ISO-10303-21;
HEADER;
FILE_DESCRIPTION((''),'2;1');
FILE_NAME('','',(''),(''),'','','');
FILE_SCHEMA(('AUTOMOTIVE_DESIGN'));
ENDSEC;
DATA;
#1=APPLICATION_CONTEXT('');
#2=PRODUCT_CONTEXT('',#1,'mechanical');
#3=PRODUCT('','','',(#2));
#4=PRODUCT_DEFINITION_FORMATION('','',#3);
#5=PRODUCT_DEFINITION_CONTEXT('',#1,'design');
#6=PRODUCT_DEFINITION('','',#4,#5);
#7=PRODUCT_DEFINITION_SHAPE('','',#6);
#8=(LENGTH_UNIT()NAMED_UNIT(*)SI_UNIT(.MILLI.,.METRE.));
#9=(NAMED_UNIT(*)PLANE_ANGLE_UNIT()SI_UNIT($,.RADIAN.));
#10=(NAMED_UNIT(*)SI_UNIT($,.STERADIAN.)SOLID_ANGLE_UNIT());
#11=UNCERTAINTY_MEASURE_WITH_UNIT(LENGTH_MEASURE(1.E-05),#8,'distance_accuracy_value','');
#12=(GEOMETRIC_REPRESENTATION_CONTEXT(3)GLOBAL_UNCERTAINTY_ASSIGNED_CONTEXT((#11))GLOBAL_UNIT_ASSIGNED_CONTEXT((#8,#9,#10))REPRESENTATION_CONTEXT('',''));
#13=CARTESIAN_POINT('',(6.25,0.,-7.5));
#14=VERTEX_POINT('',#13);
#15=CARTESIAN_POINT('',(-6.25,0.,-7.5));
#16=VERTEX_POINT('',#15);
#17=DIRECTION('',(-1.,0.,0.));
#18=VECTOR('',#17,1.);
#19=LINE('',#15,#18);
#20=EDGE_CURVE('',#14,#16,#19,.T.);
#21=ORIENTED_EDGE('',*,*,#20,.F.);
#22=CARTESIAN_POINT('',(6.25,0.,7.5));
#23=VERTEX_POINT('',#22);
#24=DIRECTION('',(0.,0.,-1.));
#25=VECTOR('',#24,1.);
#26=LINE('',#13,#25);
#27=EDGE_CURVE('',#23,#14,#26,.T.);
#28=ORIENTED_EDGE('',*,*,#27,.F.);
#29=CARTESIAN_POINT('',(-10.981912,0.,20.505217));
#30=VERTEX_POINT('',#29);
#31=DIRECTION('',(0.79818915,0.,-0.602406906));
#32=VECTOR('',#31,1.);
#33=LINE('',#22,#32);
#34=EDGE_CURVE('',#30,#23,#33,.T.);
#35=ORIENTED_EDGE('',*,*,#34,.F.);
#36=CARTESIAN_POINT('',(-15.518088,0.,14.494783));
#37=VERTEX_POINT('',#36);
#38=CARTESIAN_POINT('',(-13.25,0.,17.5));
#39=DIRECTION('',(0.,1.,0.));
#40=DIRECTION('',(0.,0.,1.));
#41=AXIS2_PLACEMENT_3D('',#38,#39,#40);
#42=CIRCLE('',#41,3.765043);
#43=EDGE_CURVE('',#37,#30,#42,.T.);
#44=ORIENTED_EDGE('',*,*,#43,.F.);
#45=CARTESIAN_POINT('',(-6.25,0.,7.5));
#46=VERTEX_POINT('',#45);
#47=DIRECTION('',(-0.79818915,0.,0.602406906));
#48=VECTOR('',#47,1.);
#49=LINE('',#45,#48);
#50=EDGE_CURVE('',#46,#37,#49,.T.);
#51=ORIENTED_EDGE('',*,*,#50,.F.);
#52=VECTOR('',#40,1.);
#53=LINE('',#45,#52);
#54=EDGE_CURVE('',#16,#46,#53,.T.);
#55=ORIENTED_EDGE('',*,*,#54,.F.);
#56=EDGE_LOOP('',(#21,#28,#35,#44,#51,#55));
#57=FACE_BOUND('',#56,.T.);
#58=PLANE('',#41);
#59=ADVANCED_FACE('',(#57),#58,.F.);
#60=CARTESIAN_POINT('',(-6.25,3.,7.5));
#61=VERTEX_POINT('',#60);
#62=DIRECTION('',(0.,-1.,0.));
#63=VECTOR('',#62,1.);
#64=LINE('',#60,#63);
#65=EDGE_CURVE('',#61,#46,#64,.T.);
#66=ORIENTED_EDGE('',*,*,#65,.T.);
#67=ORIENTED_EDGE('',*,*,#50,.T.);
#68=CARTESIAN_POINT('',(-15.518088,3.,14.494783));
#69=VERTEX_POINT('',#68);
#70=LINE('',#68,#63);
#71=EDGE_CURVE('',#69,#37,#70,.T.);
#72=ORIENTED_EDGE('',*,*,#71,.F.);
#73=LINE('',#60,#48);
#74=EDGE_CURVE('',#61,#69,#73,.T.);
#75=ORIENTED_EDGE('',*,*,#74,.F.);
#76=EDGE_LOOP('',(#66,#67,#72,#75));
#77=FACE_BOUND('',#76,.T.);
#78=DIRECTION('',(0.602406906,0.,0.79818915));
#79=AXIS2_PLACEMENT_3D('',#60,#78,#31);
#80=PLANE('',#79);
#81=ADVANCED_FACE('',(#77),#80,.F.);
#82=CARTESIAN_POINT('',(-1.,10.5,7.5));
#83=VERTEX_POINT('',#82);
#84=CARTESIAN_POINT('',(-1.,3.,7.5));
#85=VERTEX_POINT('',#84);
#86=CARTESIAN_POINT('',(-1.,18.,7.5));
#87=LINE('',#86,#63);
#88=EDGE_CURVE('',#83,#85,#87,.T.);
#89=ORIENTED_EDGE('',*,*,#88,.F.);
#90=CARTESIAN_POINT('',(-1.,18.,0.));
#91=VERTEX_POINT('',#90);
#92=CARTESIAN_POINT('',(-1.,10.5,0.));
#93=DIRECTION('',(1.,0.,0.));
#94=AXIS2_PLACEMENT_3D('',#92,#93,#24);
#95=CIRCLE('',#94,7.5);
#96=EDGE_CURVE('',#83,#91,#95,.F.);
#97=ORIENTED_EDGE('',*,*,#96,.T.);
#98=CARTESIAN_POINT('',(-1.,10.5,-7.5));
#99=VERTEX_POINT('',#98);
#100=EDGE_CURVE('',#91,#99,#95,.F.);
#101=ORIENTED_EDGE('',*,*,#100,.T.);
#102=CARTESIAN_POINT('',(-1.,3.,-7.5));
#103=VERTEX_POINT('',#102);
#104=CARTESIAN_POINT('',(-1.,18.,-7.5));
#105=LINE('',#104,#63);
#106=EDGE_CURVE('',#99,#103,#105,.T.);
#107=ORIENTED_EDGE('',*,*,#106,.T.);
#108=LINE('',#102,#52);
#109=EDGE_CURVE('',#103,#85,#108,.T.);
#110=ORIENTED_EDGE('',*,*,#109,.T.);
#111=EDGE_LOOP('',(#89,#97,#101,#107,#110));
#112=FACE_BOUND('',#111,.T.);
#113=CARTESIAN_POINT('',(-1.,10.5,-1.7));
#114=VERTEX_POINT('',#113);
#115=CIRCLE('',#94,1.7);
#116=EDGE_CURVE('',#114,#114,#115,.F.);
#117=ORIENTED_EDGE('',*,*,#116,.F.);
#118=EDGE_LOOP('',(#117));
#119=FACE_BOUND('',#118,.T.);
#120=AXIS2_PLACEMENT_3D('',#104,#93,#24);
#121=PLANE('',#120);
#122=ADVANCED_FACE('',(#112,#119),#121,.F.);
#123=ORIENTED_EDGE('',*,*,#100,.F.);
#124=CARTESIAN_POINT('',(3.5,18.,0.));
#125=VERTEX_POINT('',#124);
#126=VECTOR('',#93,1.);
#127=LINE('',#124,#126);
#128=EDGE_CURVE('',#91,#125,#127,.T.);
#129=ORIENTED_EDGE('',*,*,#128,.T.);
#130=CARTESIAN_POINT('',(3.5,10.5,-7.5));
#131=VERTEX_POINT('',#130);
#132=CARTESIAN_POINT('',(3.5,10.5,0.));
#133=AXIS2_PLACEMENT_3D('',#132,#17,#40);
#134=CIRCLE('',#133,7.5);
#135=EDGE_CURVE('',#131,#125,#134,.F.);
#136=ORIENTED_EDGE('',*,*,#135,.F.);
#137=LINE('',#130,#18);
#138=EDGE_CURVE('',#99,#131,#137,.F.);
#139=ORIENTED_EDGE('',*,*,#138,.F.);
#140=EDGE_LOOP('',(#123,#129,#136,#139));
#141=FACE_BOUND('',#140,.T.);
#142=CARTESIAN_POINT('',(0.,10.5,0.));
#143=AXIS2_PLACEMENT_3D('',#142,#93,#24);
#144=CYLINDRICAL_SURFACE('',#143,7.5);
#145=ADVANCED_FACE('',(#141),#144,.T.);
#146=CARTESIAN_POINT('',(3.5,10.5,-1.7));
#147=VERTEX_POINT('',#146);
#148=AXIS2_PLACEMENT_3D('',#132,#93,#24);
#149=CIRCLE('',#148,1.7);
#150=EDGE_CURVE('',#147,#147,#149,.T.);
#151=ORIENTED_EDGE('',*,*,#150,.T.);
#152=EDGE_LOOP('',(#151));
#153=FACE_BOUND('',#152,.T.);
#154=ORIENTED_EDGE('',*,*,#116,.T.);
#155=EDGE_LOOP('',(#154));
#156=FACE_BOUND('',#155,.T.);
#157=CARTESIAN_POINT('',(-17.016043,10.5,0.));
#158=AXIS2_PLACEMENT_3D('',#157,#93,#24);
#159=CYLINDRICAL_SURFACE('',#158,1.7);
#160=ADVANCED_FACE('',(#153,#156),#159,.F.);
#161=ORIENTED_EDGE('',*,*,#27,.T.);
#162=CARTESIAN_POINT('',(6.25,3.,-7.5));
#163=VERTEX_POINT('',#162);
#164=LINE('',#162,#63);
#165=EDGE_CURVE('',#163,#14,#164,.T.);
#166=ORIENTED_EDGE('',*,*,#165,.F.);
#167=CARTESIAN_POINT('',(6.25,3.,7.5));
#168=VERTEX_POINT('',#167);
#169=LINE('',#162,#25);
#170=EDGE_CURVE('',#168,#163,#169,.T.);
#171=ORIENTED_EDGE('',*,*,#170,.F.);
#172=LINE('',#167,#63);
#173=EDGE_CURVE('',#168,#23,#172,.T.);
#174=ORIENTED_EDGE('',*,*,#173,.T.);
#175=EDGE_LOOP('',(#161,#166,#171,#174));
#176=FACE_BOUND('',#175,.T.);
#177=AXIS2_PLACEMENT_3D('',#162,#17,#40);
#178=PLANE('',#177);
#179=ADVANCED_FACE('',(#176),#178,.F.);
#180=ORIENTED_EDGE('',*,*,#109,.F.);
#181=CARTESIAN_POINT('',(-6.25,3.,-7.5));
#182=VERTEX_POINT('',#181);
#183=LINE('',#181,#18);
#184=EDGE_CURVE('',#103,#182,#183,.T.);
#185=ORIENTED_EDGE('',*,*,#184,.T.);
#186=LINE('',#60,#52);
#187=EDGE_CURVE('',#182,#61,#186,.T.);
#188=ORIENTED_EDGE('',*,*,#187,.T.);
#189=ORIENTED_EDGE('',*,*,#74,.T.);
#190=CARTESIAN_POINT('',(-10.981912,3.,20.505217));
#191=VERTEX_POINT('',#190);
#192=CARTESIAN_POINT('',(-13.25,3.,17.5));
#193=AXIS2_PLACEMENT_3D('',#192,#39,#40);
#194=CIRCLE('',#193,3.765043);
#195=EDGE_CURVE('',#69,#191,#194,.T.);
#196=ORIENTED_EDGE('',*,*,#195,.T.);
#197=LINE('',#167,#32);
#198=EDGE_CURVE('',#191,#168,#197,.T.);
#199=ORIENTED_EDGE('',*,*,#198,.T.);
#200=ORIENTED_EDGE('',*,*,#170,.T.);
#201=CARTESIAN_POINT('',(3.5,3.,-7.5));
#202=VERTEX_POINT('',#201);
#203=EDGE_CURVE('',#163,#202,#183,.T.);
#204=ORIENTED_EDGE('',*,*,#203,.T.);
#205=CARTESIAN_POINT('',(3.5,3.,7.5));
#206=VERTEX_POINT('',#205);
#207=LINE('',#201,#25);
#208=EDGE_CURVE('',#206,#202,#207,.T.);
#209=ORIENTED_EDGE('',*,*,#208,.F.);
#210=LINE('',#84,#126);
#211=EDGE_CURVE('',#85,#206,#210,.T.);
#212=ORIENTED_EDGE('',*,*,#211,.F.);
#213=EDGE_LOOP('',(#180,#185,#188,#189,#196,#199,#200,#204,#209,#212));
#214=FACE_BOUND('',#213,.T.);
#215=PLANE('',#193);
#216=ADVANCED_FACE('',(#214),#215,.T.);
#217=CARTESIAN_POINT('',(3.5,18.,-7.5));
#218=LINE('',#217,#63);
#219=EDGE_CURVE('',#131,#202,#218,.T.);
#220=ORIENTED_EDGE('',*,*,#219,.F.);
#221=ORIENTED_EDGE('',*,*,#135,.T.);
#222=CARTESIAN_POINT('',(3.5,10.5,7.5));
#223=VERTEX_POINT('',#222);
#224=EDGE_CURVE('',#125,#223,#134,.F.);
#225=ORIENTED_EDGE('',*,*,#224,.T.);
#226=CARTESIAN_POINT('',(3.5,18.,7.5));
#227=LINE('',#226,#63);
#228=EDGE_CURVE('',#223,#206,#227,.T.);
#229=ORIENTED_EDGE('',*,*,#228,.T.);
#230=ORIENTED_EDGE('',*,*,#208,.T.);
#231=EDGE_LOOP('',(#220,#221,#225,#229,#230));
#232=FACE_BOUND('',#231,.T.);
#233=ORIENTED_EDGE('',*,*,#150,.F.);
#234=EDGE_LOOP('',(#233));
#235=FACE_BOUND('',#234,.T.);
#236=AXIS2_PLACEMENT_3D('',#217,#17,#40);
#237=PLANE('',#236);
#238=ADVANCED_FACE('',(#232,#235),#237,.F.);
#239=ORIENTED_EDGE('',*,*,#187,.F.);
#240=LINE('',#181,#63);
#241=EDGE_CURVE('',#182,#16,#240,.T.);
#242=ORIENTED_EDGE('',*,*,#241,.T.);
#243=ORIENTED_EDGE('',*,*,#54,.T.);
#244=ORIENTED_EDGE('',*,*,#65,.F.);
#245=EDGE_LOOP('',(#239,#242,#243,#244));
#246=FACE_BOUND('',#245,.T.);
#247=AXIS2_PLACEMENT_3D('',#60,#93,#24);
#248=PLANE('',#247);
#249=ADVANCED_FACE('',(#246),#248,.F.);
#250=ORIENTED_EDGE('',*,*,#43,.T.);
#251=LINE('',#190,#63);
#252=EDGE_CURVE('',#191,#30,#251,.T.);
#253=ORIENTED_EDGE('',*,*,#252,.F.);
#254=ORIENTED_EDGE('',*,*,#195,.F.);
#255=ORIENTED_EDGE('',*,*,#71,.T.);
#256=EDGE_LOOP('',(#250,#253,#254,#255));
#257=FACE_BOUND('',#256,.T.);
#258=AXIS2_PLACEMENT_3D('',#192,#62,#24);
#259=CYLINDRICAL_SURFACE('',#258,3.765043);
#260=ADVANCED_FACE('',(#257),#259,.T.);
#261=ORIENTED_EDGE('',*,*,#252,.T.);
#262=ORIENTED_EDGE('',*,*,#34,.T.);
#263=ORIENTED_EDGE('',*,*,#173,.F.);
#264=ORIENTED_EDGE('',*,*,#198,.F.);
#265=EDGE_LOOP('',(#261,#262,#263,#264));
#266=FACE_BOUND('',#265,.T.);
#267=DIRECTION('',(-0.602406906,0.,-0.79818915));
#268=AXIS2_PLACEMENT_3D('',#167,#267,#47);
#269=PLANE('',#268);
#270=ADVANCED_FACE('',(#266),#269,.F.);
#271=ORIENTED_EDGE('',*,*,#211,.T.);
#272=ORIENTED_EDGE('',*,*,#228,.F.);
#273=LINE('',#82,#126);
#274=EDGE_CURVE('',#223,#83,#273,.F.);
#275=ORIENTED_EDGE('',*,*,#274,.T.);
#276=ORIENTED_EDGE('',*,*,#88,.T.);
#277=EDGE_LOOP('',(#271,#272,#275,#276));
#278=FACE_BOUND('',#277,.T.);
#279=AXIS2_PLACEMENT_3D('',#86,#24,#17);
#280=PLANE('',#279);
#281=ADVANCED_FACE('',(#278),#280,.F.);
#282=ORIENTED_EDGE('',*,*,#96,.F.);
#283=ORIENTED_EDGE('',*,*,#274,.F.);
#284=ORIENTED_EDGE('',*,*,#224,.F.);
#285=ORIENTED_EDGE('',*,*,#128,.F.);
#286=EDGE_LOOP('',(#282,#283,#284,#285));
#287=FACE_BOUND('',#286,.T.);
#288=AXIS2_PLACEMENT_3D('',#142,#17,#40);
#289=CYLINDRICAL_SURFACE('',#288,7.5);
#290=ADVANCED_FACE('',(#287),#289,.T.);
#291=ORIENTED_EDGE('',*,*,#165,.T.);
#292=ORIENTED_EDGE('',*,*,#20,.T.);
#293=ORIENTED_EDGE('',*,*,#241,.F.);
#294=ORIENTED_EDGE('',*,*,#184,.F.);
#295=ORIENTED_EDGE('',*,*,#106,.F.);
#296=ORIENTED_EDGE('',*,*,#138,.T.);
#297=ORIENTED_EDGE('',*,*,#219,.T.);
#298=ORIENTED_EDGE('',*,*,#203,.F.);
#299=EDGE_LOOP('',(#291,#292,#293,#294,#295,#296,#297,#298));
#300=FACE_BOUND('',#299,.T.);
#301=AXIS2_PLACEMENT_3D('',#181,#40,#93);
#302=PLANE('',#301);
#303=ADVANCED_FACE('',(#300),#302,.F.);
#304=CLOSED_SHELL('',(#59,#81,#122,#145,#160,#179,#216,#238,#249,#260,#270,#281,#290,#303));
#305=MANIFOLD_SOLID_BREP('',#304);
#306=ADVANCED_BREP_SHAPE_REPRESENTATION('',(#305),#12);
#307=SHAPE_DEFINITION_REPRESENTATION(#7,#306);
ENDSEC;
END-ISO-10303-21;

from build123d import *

# Parameters (mm, degrees)
BOSS_EXTRUDE1_DEPTH = 3
SKETCH2_W           = 4.5
SKETCH2_H           = 15
BOSS_EXTRUDE2_DEPTH = 15
CUT_EXTRUDE1_REACH  = 36.599
SKETCH3_R           = 1.7
FILLET1_R           = 7.5


with BuildPart() as part:
    # Sketch1 → Boss-Extrude1 (new body)
    with BuildSketch(Plane(origin=(0, 0, 0), x_dir=(1, 0, 0), z_dir=(0, 1, 0))):
        with BuildLine():
            Line((-6.25, -7.5), (-15.518088002, -14.494783398))
            ThreePointArc((-15.518088002, -14.494783398), (-16.255216602, -19.768088002), (-10.981911998, -20.505216602))
            Line((-10.981911998, -20.505216602), (6.25, -7.5))
            Line((6.25, -7.5), (6.25, 7.5))
            Line((6.25, 7.5), (-6.25, 7.5))
            Line((-6.25, 7.5), (-6.25, -7.5))
        make_face()
    extrude(amount=BOSS_EXTRUDE1_DEPTH)

    # Sketch2 → Boss-Extrude2 (add)
    with BuildSketch(Plane(origin=(0, 3, 0), x_dir=(1, 0, 0), z_dir=(0, 1, 0))):
        with Locations((1.25, 0)):
            Rectangle(SKETCH2_W, SKETCH2_H)
    extrude(amount=BOSS_EXTRUDE2_DEPTH)

    # Sketch3 → Cut-Extrude1 (cut, up to next)
    with BuildSketch(Plane(origin=(3.5, 0, 0), x_dir=(0, 0, -1), z_dir=(1, 0, 0)), mode=Mode.PRIVATE) as cut_extrude1_sk1:
        with Locations((0, 10.5)):
            Circle(SKETCH3_R)
    cut_extrude1_tool1 = extrude(cut_extrude1_sk1.sketch, amount=-CUT_EXTRUDE1_REACH, mode=Mode.PRIVATE) & part.part
    add(cut_extrude1_tool1.solids().sort_by_distance((3.5, 10.5, 0))[0], mode=Mode.SUBTRACT)

    # Fillet1
    fillet1_edges = [part.edges().sort_by_distance(p)[0] for p in [
        (1.25, 18, -7.5),
        (1.25, 18, 7.5),
    ]]
    fillet(fillet1_edges, radius=FILLET1_R - 0.0001)  # a hair under: the kernel refuses the full size


solid = part.part
